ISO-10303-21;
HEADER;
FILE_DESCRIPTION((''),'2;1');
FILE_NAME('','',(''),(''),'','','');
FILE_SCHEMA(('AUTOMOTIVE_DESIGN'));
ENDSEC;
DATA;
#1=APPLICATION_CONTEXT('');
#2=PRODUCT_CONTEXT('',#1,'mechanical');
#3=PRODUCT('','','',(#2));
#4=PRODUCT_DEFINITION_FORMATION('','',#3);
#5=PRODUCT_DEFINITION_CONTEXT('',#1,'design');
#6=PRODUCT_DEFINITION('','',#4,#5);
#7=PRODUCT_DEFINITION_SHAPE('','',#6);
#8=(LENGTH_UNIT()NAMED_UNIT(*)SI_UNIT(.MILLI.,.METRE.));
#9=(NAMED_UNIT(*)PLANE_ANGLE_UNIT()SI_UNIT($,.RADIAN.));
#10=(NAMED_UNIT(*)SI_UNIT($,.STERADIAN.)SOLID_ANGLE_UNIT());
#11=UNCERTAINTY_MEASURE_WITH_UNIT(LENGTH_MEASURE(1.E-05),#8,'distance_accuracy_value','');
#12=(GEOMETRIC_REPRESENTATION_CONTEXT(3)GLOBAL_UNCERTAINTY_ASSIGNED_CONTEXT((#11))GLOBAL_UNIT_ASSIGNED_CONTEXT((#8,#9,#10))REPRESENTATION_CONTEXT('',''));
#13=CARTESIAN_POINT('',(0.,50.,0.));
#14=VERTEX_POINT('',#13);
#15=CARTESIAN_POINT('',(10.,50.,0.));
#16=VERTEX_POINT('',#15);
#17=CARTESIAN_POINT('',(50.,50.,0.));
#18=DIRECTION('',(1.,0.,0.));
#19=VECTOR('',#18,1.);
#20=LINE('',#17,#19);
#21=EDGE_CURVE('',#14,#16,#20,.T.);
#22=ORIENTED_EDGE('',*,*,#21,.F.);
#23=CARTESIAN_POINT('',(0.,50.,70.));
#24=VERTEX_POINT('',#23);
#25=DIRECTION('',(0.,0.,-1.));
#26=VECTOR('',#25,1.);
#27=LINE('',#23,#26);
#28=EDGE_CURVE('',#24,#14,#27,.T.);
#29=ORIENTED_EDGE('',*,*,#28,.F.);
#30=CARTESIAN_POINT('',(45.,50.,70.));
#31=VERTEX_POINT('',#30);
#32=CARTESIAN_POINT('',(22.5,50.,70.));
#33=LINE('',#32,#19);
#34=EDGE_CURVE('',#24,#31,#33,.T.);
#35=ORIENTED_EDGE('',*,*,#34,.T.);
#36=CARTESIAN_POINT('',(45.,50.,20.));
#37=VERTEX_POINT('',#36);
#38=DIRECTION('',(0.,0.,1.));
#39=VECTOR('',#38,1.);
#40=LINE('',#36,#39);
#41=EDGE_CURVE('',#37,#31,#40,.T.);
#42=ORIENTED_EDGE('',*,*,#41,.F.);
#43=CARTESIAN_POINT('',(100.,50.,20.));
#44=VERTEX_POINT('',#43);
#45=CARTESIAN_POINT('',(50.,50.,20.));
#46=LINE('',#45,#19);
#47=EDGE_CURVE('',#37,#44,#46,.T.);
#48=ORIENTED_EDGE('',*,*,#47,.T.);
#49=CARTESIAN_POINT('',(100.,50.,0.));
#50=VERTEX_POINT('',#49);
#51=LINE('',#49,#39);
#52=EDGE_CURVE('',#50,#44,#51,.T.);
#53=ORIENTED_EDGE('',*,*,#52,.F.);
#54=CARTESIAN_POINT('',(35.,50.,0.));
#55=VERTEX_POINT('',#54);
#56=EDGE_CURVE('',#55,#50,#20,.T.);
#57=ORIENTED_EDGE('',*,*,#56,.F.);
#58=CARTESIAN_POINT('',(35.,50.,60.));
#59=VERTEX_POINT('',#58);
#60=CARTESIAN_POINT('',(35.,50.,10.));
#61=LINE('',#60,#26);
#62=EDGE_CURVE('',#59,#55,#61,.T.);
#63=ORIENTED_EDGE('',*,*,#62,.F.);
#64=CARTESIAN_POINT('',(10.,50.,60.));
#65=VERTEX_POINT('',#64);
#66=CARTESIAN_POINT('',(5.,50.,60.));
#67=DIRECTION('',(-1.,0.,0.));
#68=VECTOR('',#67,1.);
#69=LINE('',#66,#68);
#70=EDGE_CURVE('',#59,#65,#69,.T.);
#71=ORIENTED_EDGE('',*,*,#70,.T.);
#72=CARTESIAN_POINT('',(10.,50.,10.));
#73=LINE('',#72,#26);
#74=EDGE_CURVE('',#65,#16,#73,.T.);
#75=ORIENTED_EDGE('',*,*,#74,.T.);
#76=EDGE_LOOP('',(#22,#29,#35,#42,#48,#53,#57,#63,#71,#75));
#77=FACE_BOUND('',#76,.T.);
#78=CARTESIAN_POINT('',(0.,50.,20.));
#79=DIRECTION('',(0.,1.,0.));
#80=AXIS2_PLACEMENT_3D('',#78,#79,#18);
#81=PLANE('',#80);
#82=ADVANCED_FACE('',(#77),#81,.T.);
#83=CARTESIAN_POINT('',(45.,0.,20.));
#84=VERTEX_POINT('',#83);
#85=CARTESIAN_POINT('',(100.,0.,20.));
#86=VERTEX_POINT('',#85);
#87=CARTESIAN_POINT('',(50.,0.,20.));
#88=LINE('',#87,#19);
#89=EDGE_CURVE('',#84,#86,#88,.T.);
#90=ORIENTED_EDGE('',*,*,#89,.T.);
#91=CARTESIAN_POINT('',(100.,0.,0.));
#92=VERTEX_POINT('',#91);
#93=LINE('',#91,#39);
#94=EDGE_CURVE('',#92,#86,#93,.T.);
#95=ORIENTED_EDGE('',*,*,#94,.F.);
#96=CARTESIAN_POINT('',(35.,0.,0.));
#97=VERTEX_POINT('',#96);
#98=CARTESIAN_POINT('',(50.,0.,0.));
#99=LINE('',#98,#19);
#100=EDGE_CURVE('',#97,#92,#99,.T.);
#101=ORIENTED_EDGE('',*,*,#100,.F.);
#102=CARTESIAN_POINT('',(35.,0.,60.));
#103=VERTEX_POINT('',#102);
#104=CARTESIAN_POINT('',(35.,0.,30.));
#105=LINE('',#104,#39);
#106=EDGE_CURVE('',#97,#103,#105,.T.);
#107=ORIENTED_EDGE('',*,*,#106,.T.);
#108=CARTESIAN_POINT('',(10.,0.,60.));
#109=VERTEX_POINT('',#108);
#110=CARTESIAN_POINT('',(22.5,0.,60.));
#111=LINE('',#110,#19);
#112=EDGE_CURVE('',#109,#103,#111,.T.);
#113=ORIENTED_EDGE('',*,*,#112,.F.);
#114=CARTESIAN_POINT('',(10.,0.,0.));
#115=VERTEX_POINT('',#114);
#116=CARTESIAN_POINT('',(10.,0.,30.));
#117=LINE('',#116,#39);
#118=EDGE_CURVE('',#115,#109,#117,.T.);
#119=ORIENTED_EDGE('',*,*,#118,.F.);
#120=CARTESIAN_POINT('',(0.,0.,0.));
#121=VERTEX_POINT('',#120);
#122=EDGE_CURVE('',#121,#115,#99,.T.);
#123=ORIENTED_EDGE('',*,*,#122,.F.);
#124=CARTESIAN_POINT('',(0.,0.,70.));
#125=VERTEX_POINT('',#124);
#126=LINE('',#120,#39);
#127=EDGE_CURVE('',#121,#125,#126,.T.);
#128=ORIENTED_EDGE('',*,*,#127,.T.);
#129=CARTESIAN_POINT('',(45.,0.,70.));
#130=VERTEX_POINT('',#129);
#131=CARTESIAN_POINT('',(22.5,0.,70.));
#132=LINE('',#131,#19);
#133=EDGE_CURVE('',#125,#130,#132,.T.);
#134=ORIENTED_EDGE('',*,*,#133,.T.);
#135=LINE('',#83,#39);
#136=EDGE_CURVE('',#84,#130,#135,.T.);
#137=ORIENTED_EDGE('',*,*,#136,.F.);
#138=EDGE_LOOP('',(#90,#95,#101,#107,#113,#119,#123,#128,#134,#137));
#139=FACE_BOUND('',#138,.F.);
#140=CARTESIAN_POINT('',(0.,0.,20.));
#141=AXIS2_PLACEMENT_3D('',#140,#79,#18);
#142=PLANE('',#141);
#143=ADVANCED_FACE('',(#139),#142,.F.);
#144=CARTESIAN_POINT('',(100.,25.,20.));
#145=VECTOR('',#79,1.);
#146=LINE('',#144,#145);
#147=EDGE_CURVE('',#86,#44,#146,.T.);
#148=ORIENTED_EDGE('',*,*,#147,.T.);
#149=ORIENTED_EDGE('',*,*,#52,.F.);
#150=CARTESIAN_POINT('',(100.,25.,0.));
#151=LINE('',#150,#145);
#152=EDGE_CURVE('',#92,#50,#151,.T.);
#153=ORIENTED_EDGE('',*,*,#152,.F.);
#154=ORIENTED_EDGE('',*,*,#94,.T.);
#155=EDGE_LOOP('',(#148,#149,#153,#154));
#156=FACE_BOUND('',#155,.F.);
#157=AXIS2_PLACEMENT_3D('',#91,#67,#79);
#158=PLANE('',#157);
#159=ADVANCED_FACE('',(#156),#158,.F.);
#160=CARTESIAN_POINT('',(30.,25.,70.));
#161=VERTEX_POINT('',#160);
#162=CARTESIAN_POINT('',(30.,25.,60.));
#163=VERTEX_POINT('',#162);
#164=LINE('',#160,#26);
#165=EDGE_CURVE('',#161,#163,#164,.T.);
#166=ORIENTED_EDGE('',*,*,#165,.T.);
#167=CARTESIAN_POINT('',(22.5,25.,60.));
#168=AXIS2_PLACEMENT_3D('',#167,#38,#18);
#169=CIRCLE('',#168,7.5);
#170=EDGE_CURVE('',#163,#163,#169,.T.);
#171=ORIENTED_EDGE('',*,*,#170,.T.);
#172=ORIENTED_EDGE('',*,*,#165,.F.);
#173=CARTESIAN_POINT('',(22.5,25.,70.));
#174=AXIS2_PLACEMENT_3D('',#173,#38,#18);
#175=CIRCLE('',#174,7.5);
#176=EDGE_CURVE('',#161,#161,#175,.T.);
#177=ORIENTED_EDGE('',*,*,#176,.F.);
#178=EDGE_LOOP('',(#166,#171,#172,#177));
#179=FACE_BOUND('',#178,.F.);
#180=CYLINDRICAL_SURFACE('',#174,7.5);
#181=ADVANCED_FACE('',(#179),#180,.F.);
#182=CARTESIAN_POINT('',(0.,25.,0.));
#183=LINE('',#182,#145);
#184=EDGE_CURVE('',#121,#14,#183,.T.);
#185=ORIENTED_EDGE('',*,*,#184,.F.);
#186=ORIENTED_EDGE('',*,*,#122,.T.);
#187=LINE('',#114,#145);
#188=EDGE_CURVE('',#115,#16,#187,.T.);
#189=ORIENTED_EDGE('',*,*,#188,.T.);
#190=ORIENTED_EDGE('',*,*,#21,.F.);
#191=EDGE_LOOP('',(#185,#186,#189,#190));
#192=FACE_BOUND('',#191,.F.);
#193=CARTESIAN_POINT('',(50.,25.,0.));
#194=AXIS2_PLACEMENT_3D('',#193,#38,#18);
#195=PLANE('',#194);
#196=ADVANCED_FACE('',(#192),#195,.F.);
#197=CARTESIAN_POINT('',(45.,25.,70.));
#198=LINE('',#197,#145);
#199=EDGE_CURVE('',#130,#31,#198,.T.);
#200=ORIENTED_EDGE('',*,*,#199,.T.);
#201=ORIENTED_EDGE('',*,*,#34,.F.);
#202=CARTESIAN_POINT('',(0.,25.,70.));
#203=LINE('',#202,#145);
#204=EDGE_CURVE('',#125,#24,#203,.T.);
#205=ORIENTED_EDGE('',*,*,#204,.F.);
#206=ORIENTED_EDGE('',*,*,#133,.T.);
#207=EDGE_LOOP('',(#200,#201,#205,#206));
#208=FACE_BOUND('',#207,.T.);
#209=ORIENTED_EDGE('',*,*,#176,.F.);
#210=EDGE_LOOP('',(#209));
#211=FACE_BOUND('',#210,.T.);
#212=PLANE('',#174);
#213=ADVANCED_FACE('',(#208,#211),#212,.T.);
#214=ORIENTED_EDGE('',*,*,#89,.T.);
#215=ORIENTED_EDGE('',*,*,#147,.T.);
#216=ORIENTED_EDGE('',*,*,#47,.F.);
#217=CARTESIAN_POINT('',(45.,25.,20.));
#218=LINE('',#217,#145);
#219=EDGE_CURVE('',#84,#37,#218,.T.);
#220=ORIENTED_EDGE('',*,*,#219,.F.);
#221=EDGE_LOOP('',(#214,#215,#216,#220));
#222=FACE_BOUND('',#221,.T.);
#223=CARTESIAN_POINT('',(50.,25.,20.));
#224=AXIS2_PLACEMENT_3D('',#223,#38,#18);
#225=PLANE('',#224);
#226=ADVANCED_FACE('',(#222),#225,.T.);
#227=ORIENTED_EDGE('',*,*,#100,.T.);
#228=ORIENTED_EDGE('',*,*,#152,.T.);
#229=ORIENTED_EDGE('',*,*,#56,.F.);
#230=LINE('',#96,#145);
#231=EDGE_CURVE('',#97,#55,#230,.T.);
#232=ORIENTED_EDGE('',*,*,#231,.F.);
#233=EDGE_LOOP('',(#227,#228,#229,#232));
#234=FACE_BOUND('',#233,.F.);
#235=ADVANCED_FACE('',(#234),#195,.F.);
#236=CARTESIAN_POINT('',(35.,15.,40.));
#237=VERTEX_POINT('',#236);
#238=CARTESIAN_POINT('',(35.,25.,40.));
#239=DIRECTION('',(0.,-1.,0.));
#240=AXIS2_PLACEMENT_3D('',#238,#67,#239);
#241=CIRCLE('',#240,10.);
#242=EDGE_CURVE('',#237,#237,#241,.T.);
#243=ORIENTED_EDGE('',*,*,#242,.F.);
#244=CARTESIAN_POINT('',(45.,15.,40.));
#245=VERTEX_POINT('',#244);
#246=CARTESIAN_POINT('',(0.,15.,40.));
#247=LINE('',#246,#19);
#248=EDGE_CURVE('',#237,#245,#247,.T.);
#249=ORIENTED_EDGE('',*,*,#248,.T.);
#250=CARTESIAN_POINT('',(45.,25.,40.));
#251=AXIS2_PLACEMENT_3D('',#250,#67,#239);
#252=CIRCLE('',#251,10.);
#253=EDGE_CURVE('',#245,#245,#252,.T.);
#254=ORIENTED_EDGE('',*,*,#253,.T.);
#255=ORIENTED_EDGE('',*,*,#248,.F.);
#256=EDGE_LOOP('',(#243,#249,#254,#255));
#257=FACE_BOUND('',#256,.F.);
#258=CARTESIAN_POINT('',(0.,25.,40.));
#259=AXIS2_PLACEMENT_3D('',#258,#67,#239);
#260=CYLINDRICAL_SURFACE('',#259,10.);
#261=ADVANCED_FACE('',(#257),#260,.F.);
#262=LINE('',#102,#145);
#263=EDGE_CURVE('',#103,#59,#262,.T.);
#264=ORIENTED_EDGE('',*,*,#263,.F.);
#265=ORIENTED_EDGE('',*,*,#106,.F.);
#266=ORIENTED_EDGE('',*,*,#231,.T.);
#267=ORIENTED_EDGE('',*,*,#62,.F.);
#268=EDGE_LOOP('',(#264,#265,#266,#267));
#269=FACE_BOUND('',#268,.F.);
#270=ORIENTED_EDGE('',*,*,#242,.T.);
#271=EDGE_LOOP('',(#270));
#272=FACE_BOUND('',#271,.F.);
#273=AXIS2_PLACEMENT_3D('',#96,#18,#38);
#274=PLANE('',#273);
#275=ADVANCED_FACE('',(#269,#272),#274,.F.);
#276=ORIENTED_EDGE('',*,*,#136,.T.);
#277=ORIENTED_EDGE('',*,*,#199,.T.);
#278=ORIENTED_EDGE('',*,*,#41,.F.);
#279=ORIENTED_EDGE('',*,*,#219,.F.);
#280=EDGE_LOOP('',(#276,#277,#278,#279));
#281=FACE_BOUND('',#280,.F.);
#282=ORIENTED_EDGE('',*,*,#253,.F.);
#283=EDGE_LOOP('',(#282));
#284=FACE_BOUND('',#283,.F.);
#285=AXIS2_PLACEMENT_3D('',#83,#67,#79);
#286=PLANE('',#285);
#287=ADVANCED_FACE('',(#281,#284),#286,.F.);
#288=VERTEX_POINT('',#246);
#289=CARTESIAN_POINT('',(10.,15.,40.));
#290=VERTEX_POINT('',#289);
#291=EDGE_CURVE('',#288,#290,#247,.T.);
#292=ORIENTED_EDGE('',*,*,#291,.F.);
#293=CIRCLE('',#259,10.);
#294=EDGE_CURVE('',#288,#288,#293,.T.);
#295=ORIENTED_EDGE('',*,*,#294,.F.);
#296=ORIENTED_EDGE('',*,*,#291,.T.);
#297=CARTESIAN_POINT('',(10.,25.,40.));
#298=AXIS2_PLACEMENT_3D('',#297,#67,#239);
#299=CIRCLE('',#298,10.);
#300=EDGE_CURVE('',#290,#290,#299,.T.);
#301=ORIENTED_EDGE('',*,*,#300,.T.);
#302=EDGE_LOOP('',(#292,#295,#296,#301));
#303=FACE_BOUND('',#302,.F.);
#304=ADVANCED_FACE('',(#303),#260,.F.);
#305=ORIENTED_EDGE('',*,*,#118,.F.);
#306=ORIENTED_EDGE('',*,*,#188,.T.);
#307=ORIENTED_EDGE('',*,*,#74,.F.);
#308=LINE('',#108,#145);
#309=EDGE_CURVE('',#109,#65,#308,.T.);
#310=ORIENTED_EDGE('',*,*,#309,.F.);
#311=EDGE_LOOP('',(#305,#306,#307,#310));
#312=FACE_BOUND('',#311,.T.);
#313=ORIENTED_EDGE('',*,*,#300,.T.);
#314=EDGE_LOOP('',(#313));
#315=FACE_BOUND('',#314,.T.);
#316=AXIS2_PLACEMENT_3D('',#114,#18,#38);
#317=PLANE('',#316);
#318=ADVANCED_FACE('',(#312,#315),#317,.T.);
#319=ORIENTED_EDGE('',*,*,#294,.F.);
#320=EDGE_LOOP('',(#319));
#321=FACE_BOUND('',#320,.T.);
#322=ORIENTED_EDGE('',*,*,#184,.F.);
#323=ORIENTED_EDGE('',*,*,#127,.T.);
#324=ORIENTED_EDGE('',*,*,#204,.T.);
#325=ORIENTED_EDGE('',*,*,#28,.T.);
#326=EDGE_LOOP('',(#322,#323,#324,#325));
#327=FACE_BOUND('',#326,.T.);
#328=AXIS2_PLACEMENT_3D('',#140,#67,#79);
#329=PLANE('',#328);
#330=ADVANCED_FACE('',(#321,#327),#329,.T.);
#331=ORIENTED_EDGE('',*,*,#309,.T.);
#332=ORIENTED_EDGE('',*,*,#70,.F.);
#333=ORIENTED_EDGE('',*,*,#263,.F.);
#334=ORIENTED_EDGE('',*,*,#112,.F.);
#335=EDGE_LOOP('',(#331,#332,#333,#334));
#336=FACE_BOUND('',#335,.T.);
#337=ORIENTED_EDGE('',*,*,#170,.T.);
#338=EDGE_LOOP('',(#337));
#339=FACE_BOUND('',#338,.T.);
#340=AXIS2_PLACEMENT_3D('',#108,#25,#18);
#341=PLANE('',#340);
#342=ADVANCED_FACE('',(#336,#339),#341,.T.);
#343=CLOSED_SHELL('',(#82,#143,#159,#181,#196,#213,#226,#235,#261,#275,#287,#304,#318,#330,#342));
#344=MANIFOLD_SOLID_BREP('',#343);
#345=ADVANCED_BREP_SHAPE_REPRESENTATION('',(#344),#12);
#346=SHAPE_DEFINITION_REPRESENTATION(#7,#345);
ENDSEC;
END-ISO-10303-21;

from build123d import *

# Parameters (mm, degrees)
F0_W      = 100
F0_H      = 50
F1_DEPTH  = 20
F2_W      = 45
F2_H      = 50
F3_DEPTH  = 50
F4_W      = 25
F4_H      = 60
F5_DEPTH  = 50.001
F6_R      = 10
F7_DEPTH  = 100.001
F8_R      = 7.5
F10_DEPTH = 70.001


# Not quite as in the source:
# - a feature of the source that left no trace in its solid (it failed there, or was rolled back) is left out


with BuildPart() as f1:
    # F0 (on Top) → F1 (new body)
    with BuildSketch(Plane.XY):
        with Locations((50, 25)):
            Rectangle(F0_W, F0_H)
    extrude(amount=F1_DEPTH)

    # F2 (on face) → F3 (join)
    with BuildSketch(Plane.XY.offset(20)):
        with Locations((22.5, 25)):
            Rectangle(F2_W, F2_H)
    extrude(amount=F3_DEPTH)

    # F4 (on face) → F5 (cut, through all)
    with BuildSketch(Plane.XZ):
        with Locations((22.5, 30)):
            Rectangle(F4_W, F4_H)
    extrude(amount=-F5_DEPTH, mode=Mode.SUBTRACT)

    # F6 (on face) → F7 (cut, through all)
    with BuildSketch(Plane(origin=(0, 0, 0), x_dir=(0, -1, 0), z_dir=(-1, 0, 0))):
        with Locations((-25, 40)):
            Circle(F6_R)
    extrude(amount=-F7_DEPTH, mode=Mode.SUBTRACT)

    # F8 (on face) → F10 (cut, through all)
    with BuildSketch(Plane.XY.offset(70)):
        with Locations((22.5, 25)):
            Circle(F8_R)
    extrude(amount=-F10_DEPTH, mode=Mode.SUBTRACT)


solid = f1.part
